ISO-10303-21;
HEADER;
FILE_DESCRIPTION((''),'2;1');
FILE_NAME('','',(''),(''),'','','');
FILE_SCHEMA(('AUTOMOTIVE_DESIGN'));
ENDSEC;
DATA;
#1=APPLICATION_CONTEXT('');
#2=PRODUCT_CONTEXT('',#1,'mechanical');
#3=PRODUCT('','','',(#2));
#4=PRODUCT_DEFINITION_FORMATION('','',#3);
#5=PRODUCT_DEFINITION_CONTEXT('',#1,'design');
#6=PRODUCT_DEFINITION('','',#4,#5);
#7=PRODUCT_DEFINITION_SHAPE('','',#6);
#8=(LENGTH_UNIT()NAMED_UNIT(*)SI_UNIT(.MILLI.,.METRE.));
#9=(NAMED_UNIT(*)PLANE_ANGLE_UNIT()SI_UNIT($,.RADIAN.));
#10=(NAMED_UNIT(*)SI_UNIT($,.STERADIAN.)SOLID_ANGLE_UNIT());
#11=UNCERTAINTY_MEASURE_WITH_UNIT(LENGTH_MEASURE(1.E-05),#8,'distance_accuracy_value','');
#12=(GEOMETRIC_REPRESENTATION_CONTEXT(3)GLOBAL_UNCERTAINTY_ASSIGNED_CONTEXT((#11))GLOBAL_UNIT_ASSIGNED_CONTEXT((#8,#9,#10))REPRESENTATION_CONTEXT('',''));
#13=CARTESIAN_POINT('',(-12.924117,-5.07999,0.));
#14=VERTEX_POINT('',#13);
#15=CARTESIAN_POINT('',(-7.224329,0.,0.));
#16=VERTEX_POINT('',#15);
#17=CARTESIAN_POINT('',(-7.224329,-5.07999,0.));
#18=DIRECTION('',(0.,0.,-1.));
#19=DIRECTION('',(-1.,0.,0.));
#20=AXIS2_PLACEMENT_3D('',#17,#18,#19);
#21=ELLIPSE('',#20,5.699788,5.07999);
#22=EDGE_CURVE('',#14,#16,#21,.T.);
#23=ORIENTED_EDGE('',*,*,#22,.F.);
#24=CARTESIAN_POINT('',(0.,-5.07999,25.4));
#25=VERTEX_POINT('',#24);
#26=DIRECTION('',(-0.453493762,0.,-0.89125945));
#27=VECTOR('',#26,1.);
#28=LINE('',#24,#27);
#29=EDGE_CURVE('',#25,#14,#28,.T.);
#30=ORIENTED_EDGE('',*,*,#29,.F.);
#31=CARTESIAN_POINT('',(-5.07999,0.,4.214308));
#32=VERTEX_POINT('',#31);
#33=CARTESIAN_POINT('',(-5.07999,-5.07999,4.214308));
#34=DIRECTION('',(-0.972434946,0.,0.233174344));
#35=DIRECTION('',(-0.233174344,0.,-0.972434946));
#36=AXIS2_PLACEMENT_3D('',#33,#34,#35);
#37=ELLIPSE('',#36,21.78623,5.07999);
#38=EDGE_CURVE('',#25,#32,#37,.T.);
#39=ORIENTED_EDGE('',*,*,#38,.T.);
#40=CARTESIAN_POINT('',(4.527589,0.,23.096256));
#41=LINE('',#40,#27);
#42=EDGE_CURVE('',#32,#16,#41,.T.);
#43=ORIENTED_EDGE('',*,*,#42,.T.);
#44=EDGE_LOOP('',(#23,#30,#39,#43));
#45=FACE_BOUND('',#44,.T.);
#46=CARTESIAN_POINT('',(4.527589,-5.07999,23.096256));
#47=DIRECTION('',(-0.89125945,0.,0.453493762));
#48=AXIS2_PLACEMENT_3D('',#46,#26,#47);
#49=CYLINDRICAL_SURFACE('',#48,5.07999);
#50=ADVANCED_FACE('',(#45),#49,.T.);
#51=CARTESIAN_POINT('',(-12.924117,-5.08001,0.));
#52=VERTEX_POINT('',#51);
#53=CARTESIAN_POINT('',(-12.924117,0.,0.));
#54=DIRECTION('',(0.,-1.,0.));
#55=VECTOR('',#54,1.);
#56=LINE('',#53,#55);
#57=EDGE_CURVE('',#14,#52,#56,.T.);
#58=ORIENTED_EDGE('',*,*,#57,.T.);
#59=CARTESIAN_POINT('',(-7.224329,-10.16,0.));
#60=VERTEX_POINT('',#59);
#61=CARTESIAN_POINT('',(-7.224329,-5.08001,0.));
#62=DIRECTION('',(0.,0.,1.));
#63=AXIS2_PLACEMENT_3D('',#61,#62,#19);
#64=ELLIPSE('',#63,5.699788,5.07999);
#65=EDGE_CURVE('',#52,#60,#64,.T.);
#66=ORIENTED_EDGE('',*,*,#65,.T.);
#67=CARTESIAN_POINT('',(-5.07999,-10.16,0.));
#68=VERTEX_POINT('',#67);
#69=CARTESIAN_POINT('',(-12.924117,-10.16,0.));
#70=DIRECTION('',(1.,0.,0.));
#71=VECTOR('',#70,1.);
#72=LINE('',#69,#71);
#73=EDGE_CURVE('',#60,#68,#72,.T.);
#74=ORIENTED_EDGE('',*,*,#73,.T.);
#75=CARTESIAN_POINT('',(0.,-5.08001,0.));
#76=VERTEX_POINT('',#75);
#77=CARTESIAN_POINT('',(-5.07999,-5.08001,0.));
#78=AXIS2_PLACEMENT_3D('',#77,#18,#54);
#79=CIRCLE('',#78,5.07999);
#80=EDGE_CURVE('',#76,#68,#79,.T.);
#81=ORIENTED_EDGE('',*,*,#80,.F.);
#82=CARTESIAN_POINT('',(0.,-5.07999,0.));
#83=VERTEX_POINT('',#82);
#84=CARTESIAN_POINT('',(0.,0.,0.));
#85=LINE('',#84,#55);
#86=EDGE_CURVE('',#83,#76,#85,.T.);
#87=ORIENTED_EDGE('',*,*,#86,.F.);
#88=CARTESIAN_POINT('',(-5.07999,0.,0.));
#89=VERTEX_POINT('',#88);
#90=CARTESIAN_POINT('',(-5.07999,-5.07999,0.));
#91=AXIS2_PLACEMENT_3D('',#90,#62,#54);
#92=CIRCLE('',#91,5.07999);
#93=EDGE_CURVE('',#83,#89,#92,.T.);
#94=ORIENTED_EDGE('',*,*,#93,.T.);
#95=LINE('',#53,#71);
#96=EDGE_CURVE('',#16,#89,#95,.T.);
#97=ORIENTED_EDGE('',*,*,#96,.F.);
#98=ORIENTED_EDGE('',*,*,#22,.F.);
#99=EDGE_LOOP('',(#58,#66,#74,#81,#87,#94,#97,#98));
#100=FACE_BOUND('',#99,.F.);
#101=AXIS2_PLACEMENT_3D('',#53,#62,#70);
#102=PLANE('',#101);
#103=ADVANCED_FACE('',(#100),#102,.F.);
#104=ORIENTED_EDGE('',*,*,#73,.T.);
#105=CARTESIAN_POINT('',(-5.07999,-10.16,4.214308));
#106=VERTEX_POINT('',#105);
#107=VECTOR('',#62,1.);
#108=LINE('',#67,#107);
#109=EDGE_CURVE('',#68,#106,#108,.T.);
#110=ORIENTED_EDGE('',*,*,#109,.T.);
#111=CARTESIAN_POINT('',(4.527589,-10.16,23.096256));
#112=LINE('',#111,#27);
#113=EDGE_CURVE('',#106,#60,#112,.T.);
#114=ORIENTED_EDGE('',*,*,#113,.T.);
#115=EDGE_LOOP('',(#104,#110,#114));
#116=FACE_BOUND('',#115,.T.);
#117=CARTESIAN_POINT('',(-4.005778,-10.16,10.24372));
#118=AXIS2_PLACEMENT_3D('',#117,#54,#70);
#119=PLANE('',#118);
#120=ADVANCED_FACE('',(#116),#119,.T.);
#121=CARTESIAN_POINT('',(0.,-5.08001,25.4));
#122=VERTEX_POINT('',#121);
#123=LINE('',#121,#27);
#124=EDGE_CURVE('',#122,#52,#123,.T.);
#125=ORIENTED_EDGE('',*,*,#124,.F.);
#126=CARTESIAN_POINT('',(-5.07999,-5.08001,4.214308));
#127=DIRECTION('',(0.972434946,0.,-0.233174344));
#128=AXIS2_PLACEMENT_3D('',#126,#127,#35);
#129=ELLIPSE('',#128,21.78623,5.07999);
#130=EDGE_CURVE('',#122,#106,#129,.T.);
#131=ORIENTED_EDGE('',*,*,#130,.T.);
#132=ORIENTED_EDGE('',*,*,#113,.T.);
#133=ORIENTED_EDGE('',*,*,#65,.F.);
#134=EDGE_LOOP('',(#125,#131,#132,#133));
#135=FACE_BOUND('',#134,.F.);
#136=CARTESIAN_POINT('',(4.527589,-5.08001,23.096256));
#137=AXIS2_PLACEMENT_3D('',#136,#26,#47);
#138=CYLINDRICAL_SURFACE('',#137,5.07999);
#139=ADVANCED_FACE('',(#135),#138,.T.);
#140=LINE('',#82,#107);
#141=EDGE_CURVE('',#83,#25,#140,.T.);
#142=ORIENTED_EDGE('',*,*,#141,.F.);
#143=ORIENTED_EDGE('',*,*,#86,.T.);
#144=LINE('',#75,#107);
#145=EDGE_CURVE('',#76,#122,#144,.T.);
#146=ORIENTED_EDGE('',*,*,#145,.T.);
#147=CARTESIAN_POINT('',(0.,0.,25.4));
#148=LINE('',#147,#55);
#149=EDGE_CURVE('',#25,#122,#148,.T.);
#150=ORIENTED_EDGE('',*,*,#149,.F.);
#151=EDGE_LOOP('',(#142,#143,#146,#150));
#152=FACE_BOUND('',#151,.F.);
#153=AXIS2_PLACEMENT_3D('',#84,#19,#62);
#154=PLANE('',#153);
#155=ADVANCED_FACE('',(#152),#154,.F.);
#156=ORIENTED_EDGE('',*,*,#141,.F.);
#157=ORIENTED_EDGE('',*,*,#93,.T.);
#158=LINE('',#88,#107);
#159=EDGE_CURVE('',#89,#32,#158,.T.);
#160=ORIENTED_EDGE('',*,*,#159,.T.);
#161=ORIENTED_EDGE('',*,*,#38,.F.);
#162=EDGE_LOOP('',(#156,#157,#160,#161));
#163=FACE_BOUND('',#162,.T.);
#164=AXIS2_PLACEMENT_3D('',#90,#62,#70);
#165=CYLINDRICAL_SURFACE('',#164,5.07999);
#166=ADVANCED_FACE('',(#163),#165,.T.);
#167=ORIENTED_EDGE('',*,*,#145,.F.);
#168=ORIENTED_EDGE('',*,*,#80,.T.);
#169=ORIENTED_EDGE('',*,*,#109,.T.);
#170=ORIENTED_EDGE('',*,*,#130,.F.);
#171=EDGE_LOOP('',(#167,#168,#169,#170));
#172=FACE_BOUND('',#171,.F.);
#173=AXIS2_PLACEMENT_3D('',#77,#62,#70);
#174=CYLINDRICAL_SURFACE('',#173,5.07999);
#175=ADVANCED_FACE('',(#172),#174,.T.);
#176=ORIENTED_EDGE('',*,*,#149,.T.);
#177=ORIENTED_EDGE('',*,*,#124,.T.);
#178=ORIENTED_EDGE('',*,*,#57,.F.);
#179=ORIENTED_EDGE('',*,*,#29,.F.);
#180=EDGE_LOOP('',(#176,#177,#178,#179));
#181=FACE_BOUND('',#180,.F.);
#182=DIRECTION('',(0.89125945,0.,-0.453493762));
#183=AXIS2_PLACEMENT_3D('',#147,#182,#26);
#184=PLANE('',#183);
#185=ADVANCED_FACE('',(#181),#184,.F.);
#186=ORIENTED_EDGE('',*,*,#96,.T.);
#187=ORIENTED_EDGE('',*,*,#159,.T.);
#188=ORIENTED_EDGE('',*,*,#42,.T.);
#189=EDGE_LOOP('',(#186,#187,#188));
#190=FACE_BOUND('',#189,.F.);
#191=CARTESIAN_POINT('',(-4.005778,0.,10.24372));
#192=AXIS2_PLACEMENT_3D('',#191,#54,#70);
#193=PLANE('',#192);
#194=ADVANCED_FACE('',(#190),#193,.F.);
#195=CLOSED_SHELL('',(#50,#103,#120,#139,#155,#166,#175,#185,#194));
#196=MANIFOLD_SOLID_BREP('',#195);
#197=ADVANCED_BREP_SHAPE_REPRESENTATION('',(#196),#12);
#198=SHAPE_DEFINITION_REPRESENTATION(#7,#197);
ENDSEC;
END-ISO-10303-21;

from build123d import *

# Parameters (mm, degrees)
F1_DEPTH = 10.16
F2_R     = 5.07999


# Not quite as in the source:
# - a fillet or chamfer is up to 0.001 mm smaller than in the source, because OpenCascade refuses the exact size


with BuildPart() as f1:
    # F0 (on Front) → F1 (new body)
    with BuildSketch(Plane.XZ):
        Polygon((-12.9241171581, 0), (0, 0), (0, 25.4), align=None)
    extrude(amount=F1_DEPTH)

    # F2 (radius 5.08 in the source; OpenCascade refuses exactly that, so slightly less here)
    f2_edges = [f1.edges().sort_by_distance(p)[0] for p in [
        (-6.462059, 0, 12.7),
        (-6.462059, -10.16, 12.7),
        (0, 0, 12.7),
        (0, -10.16, 12.7),
    ]]
    fillet(f2_edges, radius=F2_R)


solid = f1.part
